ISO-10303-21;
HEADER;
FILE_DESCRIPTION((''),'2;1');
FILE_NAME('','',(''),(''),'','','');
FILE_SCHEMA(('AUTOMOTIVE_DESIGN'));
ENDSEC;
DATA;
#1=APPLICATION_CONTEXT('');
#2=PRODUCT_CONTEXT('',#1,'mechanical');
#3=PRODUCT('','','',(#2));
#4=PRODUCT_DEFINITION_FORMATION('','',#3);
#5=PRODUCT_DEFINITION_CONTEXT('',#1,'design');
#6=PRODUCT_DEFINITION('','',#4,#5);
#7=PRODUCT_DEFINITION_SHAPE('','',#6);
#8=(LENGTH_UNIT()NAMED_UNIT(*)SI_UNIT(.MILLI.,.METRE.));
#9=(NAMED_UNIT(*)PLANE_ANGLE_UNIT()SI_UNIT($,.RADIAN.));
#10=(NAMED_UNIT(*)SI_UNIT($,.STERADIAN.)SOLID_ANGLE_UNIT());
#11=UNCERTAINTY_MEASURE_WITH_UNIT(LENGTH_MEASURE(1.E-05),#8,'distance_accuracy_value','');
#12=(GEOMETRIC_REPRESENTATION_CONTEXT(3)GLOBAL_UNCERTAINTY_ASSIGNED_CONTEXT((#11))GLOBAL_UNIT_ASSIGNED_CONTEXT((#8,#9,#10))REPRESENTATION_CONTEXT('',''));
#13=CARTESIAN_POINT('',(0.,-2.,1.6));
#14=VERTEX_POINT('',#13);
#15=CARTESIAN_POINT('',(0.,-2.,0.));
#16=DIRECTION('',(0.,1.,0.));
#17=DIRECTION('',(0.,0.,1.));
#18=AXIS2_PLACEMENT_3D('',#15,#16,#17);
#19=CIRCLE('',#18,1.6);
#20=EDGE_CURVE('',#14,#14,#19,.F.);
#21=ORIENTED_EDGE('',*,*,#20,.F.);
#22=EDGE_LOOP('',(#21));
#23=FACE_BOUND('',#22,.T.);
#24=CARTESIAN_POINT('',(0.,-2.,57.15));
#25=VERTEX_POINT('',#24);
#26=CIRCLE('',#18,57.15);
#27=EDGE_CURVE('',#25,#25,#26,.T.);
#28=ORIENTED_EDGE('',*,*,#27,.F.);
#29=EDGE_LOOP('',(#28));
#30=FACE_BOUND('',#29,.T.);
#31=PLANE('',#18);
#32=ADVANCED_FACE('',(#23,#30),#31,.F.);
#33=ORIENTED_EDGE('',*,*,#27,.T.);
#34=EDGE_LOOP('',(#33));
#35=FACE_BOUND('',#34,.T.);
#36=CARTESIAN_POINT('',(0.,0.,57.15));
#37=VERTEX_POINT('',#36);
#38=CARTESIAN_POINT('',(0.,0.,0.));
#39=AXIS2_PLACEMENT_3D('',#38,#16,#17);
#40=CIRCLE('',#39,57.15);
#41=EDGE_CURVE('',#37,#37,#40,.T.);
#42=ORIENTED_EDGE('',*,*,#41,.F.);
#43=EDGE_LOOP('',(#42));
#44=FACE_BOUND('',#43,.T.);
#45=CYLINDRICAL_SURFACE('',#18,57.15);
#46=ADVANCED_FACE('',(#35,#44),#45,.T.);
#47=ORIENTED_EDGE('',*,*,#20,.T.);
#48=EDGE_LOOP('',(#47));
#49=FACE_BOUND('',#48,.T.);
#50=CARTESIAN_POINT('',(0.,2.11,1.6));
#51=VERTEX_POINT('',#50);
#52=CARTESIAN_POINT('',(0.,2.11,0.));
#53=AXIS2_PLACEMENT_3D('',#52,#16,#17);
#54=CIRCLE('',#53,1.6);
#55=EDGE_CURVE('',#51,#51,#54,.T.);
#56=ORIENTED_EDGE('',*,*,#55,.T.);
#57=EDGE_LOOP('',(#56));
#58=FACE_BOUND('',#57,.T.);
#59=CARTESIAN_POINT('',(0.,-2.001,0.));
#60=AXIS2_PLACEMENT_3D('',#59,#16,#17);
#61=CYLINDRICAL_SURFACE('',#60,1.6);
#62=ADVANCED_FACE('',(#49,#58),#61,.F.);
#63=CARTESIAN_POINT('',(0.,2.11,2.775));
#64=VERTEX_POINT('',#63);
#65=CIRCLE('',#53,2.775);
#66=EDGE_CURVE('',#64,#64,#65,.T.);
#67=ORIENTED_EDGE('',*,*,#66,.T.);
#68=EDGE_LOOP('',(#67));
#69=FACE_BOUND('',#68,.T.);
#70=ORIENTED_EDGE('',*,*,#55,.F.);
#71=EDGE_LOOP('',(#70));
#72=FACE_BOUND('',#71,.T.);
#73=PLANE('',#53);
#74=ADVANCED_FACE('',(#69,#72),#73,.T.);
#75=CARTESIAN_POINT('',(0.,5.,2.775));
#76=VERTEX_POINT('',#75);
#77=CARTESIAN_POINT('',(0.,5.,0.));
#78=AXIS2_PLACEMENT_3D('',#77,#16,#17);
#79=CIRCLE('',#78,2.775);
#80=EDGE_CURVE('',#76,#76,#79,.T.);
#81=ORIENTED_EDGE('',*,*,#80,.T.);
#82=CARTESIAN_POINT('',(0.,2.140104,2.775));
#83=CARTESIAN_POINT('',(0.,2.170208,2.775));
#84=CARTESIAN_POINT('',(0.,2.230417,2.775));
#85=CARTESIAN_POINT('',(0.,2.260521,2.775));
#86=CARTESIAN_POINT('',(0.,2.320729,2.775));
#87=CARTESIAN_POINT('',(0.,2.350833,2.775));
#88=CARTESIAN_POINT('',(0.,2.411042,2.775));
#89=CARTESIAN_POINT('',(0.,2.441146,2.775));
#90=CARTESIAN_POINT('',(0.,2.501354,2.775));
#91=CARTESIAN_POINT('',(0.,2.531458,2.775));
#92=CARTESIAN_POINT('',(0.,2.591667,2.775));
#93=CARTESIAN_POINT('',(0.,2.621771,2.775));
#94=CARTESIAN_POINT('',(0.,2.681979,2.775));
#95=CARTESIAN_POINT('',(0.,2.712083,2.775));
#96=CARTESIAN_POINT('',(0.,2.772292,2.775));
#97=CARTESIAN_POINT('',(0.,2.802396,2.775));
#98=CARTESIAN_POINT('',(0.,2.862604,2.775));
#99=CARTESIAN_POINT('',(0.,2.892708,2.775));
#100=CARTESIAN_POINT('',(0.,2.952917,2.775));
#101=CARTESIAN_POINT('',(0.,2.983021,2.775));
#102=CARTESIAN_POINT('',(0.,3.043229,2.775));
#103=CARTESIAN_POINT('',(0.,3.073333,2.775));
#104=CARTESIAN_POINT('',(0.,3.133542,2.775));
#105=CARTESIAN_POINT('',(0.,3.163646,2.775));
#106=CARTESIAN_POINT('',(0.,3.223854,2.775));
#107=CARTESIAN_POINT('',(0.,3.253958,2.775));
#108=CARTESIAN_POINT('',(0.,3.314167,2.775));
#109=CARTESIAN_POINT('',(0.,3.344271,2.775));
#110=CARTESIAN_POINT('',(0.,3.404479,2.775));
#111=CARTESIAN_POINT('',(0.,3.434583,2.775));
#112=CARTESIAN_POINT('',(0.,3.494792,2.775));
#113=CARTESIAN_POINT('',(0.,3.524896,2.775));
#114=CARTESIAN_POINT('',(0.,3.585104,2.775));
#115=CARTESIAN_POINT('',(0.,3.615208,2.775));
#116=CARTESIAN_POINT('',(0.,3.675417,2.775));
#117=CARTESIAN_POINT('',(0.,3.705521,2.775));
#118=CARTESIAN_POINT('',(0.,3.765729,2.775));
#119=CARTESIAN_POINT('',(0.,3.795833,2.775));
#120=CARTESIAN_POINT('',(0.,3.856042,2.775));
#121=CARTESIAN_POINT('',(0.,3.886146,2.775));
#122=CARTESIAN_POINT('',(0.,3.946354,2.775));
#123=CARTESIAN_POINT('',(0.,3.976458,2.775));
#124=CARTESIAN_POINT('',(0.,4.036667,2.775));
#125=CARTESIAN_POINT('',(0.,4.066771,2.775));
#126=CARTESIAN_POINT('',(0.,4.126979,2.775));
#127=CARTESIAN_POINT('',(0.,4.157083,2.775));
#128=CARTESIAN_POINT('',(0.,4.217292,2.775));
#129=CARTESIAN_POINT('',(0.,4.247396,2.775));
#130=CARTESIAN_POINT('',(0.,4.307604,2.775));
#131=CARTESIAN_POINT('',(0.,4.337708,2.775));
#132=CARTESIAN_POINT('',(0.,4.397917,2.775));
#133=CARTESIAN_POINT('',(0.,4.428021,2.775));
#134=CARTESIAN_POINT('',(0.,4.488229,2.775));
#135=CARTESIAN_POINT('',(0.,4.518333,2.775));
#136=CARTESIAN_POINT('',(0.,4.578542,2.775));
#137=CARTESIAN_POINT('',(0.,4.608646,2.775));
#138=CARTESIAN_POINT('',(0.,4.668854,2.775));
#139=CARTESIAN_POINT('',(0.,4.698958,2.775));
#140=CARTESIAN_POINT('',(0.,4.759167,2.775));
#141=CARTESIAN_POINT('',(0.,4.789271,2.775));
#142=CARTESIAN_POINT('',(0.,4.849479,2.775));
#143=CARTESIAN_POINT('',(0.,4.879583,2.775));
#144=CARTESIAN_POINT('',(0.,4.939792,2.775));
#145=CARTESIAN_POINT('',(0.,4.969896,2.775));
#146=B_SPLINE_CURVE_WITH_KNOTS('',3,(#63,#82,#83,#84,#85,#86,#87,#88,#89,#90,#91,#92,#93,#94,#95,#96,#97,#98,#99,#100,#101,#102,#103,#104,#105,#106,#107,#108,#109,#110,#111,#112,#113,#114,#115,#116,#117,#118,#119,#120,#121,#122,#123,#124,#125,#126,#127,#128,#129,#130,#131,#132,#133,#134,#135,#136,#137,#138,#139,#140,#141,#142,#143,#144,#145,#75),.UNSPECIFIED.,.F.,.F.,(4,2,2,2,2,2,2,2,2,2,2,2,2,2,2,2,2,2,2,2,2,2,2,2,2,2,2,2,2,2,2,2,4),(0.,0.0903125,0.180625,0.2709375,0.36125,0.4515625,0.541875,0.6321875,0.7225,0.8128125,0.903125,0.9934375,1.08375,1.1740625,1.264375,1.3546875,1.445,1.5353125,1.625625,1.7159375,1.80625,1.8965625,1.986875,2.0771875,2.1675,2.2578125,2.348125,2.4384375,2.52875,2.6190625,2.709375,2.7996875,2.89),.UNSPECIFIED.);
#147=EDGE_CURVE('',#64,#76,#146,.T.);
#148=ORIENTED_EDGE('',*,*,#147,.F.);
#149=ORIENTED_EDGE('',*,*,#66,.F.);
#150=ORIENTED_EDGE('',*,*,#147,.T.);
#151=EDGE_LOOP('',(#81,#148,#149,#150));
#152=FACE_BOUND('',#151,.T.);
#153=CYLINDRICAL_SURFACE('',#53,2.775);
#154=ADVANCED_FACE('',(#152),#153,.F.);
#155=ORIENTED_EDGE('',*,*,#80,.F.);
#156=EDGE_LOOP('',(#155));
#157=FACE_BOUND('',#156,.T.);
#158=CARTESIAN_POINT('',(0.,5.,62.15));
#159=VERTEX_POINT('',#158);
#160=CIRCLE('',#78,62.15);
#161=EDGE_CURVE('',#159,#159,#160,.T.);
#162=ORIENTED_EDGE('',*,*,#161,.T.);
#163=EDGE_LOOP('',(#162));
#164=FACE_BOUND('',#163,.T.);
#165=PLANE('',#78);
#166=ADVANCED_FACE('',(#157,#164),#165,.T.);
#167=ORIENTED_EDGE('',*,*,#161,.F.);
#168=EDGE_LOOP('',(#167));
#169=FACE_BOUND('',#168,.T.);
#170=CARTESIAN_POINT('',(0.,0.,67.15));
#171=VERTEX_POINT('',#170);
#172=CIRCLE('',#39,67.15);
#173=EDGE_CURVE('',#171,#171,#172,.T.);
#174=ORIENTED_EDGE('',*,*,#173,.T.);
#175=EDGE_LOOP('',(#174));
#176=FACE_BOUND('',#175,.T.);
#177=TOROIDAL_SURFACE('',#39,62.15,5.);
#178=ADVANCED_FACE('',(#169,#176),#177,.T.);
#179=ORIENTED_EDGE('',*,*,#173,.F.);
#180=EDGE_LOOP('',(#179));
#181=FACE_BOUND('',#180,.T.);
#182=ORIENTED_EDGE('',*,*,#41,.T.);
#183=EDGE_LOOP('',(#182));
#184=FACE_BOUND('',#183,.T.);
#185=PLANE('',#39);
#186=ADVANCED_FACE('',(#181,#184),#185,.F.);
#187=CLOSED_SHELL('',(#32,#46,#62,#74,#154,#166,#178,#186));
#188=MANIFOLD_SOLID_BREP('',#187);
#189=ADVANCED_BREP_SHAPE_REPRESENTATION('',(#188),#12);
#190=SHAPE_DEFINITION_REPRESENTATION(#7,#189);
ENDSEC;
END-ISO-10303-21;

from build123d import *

# Parameters (mm, degrees)
SKETCH1_R           = 67.15
BOSS_EXTRUDE1_DEPTH = 5
SKETCH1_3_R         = 57.15
BOSS_EXTRUDE2_DEPTH = 2
SKETCH2_R           = 2.775
CUT_EXTRUDE1_DEPTH  = 2.89
CUT_EXTRUDE2_REACH  = 97.053
SKETCH3_R           = 1.6
FILLET1_R           = 5


with BuildPart() as part:
    # Sketch1 → Boss-Extrude1 (new body)
    with BuildSketch(Plane(origin=(0, 0, 0), x_dir=(1, 0, 0), z_dir=(0, 1, 0))):
        with Locations(Location((0, 0, 0), (0, 0, 270))):
            Circle(SKETCH1_R)
    extrude(amount=BOSS_EXTRUDE1_DEPTH)

    # Sketch1<3> → Boss-Extrude2 (add)
    with BuildSketch(Plane(origin=(0, 0, 0), x_dir=(1, 0, 0), z_dir=(0, 1, 0))):
        with Locations(Location((0, 0, 0), (0, 0, 270))):
            Circle(SKETCH1_3_R)
    extrude(amount=-BOSS_EXTRUDE2_DEPTH)

    # Sketch2 → Cut-Extrude1 (cut)
    with BuildSketch(Plane(origin=(0, 5, 0), x_dir=(1, 0, 0), z_dir=(0, 1, 0))):
        with Locations(Location((0, 0, 0), (0, 0, 270))):
            Circle(SKETCH2_R)
    extrude(amount=-CUT_EXTRUDE1_DEPTH, mode=Mode.SUBTRACT)

    # Sketch3 → Cut-Extrude2 (cut, up to next)
    with BuildSketch(Plane(origin=(0, 2.11, 0), x_dir=(1, 0, 0), z_dir=(0, 1, 0)), mode=Mode.PRIVATE) as cut_extrude2_sk1:
        with Locations(Location((0, 0, 0), (0, 0, 270))):
            Circle(SKETCH3_R)
    cut_extrude2_tool1 = extrude(cut_extrude2_sk1.sketch, amount=-CUT_EXTRUDE2_REACH, mode=Mode.PRIVATE) & part.part
    add(cut_extrude2_tool1.solids().sort_by_distance((0, 2.11, 0))[0], mode=Mode.SUBTRACT)

    # Fillet1
    fillet1_edges = [part.edges().sort_by_distance(p)[0] for p in [
        (0, 5, -67.15),
    ]]
    fillet(fillet1_edges, radius=FILLET1_R - 0.0001)  # a hair under: the kernel refuses the full size


solid = part.part
